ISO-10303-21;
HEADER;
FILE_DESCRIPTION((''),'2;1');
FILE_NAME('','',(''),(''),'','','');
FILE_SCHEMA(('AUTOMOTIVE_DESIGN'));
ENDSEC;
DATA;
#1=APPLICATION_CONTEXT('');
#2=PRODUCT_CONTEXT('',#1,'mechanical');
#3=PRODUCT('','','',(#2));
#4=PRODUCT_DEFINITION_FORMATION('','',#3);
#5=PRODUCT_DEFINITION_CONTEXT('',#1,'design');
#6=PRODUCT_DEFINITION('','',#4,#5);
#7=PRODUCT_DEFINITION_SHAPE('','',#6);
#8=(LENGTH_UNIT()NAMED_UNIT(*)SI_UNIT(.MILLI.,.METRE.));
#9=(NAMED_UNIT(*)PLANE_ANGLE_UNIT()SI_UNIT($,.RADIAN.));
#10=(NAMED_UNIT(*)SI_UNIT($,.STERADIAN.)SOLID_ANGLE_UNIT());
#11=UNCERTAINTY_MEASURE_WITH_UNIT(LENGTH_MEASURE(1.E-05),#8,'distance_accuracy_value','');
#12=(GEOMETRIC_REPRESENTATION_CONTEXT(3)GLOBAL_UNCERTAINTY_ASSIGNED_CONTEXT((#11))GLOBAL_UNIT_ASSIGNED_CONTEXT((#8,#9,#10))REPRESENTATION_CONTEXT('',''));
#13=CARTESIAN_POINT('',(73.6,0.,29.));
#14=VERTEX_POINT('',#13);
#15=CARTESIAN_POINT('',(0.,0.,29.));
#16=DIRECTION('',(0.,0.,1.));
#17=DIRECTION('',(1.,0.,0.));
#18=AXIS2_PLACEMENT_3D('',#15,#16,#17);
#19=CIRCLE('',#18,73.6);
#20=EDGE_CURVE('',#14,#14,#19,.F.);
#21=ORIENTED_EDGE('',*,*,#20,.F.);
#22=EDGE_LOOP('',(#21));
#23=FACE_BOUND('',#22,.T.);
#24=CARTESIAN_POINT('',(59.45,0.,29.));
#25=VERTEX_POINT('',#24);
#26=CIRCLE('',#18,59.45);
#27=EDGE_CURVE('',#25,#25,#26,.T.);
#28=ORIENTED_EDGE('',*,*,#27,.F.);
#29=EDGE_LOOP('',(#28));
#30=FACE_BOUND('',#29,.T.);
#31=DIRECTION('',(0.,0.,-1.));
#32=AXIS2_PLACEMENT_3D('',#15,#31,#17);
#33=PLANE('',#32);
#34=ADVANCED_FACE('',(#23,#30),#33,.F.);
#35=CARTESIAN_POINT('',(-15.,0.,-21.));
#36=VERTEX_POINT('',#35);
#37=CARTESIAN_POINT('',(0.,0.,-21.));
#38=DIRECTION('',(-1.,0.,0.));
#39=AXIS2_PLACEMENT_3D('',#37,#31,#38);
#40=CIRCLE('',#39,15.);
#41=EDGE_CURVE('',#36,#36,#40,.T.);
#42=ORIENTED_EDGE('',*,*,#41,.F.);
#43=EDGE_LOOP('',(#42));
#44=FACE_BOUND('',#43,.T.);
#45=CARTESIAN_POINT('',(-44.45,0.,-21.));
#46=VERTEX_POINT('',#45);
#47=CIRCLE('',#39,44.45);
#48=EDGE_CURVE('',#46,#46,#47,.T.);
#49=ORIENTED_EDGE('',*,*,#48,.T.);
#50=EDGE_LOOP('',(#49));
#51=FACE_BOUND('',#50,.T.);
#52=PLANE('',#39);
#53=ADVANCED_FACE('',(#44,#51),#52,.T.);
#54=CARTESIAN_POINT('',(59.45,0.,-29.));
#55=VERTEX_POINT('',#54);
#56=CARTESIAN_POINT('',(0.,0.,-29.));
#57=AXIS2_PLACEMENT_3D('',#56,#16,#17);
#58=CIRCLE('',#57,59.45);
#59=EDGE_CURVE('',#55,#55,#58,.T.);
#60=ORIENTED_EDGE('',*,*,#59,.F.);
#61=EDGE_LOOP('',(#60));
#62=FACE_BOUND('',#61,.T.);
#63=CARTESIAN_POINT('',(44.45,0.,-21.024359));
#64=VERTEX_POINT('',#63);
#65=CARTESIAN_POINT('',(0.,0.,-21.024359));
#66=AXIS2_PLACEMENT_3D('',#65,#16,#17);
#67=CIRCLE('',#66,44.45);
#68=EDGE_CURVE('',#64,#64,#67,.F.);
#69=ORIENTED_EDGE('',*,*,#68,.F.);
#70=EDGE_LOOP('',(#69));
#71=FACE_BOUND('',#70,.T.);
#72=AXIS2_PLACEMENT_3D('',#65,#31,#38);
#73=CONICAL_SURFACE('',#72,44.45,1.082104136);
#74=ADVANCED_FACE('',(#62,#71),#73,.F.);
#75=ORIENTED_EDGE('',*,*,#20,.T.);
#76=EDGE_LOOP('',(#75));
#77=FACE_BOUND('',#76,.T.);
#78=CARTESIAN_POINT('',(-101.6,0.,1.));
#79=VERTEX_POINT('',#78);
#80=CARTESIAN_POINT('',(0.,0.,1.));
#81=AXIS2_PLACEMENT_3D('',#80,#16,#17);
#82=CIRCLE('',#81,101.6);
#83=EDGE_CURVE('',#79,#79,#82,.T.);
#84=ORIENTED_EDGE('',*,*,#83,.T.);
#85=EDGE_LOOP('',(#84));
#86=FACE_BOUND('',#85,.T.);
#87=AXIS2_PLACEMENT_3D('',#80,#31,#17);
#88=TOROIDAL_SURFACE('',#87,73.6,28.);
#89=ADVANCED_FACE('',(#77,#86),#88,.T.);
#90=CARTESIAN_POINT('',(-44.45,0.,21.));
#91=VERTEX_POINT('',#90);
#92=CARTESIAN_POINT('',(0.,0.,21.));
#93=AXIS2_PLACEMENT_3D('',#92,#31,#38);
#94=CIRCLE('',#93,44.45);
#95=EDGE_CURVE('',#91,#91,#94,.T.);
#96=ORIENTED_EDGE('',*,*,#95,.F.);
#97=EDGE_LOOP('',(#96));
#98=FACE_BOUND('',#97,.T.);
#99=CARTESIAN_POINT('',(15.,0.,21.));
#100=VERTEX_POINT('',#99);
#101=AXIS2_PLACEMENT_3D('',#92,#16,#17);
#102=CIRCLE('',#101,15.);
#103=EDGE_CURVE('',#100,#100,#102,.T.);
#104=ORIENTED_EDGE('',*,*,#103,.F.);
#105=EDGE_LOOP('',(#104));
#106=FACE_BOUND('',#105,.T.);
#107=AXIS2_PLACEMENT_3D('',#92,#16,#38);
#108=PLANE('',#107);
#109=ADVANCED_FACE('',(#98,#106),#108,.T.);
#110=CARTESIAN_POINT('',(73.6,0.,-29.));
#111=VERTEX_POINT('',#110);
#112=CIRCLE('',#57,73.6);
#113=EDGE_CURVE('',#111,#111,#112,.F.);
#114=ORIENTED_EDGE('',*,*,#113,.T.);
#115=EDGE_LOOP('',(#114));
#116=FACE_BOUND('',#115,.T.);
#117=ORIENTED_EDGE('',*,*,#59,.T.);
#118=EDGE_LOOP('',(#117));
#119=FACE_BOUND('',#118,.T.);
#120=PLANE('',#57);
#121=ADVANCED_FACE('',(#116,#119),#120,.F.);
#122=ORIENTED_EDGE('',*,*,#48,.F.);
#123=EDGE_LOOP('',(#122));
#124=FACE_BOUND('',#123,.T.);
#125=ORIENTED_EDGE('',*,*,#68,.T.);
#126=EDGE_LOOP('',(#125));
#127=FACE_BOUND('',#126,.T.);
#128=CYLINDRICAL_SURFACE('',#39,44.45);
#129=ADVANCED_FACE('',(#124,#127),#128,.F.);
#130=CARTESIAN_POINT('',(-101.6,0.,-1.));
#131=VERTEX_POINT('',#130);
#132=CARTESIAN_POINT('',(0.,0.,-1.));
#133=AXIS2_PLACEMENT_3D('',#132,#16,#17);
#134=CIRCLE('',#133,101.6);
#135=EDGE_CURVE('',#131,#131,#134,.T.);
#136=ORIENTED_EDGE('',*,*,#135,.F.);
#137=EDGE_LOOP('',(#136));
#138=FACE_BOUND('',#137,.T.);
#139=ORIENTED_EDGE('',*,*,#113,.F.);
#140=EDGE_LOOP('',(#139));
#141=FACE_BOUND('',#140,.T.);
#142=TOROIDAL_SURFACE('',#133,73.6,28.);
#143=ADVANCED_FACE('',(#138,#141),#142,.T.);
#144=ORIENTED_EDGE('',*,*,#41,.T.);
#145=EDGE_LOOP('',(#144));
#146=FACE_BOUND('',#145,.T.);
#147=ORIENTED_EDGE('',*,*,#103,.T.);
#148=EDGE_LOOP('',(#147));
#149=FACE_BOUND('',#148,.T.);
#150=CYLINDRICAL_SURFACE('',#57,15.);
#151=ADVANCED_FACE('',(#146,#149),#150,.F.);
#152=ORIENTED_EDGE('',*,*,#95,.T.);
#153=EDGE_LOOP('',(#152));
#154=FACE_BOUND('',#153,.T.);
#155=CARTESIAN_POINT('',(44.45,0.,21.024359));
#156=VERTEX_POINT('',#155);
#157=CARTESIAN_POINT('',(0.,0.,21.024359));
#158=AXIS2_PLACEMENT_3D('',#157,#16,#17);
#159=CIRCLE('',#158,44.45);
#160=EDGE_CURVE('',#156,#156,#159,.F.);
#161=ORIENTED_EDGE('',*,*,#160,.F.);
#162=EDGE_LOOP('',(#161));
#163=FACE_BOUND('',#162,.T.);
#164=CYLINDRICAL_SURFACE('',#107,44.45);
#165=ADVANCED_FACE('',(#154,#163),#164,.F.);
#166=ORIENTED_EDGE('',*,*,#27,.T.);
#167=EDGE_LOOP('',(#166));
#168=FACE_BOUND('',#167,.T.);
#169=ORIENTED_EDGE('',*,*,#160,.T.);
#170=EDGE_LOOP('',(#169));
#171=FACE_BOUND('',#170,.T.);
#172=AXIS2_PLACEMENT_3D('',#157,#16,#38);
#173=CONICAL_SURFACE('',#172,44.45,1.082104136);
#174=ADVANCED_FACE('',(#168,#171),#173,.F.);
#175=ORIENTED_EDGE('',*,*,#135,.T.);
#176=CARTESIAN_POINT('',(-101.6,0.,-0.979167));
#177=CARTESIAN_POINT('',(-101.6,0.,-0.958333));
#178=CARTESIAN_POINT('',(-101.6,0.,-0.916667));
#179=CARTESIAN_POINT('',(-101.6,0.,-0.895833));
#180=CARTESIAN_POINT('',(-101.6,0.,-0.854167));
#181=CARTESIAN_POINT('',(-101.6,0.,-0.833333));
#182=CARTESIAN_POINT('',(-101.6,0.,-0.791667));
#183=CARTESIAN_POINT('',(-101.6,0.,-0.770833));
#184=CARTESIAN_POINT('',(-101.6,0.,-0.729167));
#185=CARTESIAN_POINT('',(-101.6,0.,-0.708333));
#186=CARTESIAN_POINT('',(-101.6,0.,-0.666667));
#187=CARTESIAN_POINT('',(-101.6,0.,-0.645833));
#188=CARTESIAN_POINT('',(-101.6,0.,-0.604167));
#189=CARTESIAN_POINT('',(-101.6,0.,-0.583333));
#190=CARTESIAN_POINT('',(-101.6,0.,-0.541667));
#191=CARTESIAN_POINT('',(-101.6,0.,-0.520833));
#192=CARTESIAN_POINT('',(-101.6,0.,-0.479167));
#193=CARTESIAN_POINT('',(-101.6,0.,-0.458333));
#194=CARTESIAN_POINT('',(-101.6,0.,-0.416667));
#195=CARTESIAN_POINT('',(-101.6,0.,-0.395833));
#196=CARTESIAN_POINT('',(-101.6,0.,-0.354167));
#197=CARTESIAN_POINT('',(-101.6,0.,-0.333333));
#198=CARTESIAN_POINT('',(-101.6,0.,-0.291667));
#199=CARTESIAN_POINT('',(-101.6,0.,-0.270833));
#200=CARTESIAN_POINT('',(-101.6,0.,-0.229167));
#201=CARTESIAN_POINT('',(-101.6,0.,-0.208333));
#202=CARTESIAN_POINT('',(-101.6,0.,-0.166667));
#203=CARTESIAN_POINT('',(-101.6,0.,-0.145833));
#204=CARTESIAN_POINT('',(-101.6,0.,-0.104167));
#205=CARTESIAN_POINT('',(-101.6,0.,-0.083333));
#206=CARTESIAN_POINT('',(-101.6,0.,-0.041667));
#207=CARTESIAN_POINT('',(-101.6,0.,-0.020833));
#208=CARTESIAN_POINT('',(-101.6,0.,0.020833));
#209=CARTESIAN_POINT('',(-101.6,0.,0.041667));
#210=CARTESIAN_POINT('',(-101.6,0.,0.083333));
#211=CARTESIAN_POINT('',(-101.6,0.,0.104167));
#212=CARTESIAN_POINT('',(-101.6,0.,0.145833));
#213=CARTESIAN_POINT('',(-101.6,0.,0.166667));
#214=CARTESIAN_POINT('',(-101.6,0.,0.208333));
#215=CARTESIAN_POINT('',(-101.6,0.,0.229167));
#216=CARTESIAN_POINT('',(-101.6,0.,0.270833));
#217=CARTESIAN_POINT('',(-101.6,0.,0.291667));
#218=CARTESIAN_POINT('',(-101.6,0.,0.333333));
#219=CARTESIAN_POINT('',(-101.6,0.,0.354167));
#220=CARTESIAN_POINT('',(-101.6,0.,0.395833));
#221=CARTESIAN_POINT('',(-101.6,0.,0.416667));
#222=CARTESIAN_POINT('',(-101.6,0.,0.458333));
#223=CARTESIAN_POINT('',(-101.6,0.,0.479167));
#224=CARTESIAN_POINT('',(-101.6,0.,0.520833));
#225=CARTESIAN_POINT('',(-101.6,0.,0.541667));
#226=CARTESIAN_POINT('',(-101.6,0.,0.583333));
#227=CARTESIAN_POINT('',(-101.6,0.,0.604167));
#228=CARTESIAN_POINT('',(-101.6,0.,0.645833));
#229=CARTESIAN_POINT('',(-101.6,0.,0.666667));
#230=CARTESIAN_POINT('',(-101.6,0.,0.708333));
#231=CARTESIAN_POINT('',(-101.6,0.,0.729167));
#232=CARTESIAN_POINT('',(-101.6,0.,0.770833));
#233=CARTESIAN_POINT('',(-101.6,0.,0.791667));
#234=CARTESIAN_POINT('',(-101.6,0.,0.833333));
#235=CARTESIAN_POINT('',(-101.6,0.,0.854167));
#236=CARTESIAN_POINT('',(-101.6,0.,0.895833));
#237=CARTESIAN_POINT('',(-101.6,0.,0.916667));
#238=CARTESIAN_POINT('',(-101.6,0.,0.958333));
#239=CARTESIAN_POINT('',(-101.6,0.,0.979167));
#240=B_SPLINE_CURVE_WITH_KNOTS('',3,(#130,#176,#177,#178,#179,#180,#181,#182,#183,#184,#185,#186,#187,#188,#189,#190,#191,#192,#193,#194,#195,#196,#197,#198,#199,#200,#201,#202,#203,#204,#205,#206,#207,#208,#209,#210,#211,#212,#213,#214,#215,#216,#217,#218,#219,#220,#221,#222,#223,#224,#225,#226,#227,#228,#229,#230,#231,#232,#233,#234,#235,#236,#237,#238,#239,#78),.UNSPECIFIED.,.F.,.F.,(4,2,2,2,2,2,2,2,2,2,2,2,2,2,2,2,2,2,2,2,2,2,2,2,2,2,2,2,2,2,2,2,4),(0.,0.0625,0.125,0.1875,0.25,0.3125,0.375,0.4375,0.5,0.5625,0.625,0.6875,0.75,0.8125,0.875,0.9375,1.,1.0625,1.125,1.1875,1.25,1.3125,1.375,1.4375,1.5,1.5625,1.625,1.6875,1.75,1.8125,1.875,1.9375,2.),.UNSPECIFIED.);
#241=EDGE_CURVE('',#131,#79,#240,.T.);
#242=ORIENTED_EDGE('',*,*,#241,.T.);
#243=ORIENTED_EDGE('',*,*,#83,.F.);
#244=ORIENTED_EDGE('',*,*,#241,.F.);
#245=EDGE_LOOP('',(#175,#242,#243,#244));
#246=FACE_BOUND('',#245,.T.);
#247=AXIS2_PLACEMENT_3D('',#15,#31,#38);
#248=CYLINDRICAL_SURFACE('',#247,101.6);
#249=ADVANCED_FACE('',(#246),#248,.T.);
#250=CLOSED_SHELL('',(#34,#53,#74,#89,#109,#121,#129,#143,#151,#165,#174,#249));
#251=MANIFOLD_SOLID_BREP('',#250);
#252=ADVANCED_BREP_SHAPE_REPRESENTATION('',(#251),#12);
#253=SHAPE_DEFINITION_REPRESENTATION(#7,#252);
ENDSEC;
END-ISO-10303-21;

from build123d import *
from build123d.topology import SkipClean

# Parameters (mm, degrees)
CROQUIS1_R                   = 101.6
CROQUIS1_R_2                 = 7.9375
SALIENTE_EXTRUIR1_DEPTH      = 29
REDONDEO1_R                  = 28
CROQUIS2_R                   = 44.45
CORTAR_EXTRUIR1_DEPTH        = 8
CHAFL_N1_SIZE                = 15
CHAFL_N1_SIZE2               = 7.975641475
CHAFL_N2_SIZE                = 7.975641475
CHAFL_N2_SIZE_2              = 15
CORTAR_EXTRUIR2_DEPTH        = 147.581445076
CORTAR_EXTRUIR2_DEPTH_BACK   = 147.581445076
CROQUIS5_R                   = 7.9375
SALIENTE_EXTRUIR2_DEPTH      = 120
CROQUIS6_R                   = 12.9375
CROQUIS6_R_2                 = 7.9375
SALIENTE_EXTRUIR3_DEPTH      = 20
CROQUIS8_R                   = 3
CORTAR_EXTRUIR3_DEPTH        = 20
SALIENTE_EXTRUIR4_DEPTH      = 10
REDONDEO2_R                  = 1
CROQUIS11_R                  = 15
CORTAR_EXTRUIR4_DEPTH        = 50
SALIENTE_EXTRUIR5_DEPTH      = 5
SALIENTE_EXTRUIR5_DEPTH_BACK = 50
CROQUIS12_R                  = 15
CROQUIS12_R_2                = 7.9375
CROQUIS15_R                  = 7.9375
SALIENTE_EXTRUIR7_DEPTH      = 5
CROQUIS13_R                  = 3
SALIENTE_EXTRUIR8_DEPTH      = 5
SALIENTE_EXTRUIR8_2_DEPTH    = 5
SALIENTE_EXTRUIR8_3_DEPTH    = 5
SALIENTE_EXTRUIR8_4_DEPTH    = 5
CROQUIS17_R                  = 3
CORTAR_EXTRUIR5_DEPTH        = 16


with BuildPart() as part:
    # Croquis1 → Saliente-Extruir1 (new, symmetric)
    with BuildSketch(Plane.XY):
        with Locations(Location((0, 0, 0), (0, 0, 180))):
            Circle(CROQUIS1_R)
        with Locations(Location((0, 0, 0), (0, 0, 180))):
            Circle(CROQUIS1_R_2, mode=Mode.SUBTRACT)
    extrude(amount=SALIENTE_EXTRUIR1_DEPTH, both=True)

    # Redondeo1
    redondeo1_edges = [part.edges().sort_by_distance(p)[0] for p in [
        (101.6, 0, -29),
        (101.6, 0, 29),
    ]]
    fillet(redondeo1_edges, radius=REDONDEO1_R)

    # Croquis2 → Cortar-Extruir1 (cut)
    with BuildSketch(Plane(origin=(0, 0, -29), x_dir=(-1, 0, 0), z_dir=(0, 0, -1))):
        Circle(CROQUIS2_R)
    cortar_extruir1 = extrude(amount=-CORTAR_EXTRUIR1_DEPTH, mode=Mode.SUBTRACT)

    # Simetría3: Cortar-Extruir1 across plane
    add(cortar_extruir1.mirror(Plane.XY), mode=Mode.SUBTRACT)

    # Chaflán1
    chafl_n1_edges = [part.edges().sort_by_distance(p)[0] for p in [
        (44.45, 0, -29),
    ]]
    chafl_n1_side = [part.faces().sort_by_distance(p)[0] for p in [
        (71.518277636, 0, -29),
    ]]
    chamfer(chafl_n1_edges, length=CHAFL_N1_SIZE, length2=CHAFL_N1_SIZE2, reference=chafl_n1_side[0])

    # Chaflán2
    # the kernel refuses this chamfer: 15, 7.975641475 mm, written as the material it takes off along each edge
    with BuildSketch(Plane(origin=(0, 0, 29), x_dir=(-1, 0, 0), z_dir=(0, -1, 0))) as chafl_n2_piece_1_section:
        Polygon((44.45 + CHAFL_N2_SIZE, 0), (44.45, CHAFL_N2_SIZE_2), (44.45, 0), align=None)
    chafl_n2_piece_1 = revolve(axis=Axis((0, 0, 29), (0, 0, -1)), mode=Mode.PRIVATE)
    chafl_n2_piece_1 = split(chafl_n2_piece_1, bisect_by=Plane(origin=(50.219175815, 0, 21), z_dir=(0, 0, 1)), keep=Keep.TOP, mode=Mode.PRIVATE)
    add(chafl_n2_piece_1, mode=Mode.SUBTRACT)

    # Croquis3 → Cortar-Extruir2 (cut, two sides: drawn at the far end of the back side and taken through both)
    with BuildSketch(Plane(origin=(0, 0, 0), x_dir=(0, 0, -1), z_dir=(1, 0, 0)).offset(-CORTAR_EXTRUIR2_DEPTH_BACK)):
        Polygon((0, -580.951086966), (0, -121.331484358), (0, 121.331484358), (0, 580.951086966), (-919.239205217, 580.951086966), (-919.239205217, -580.951086966), align=None)
    extrude(amount=CORTAR_EXTRUIR2_DEPTH + CORTAR_EXTRUIR2_DEPTH_BACK, mode=Mode.SUBTRACT)

    # Simetría4: part across plane


with BuildPart() as part_1:
    add(part.part)
    add(part.part.mirror(Plane(origin=(376.375487344, -121.331484358, 0), x_dir=(1, 0, 0), z_dir=(0, 0, 1))))

    # Croquis11 → Cortar-Extruir4 (cut)
    with BuildSketch(Plane.XY.offset(21)):
        Circle(CROQUIS11_R)
    extrude(amount=-CORTAR_EXTRUIR4_DEPTH, mode=Mode.SUBTRACT)


with BuildPart() as body_2:
    # Croquis5 → Saliente-Extruir2 (new body)
    with BuildSketch(Plane.XY.offset(21)):
        with Locations(Location((0, 0, 0), (0, 0, 180))):
            Circle(CROQUIS5_R)
    extrude(amount=-SALIENTE_EXTRUIR2_DEPTH)


with BuildPart() as body_3:
    # Croquis6 → Saliente-Extruir3 (new body)
    with BuildSketch(Plane(origin=(0, 0, -99), x_dir=(-1, 0, 0), z_dir=(0, 0, -1))):
        Circle(CROQUIS6_R)
        Circle(CROQUIS6_R_2, mode=Mode.SUBTRACT)
    extrude(amount=-SALIENTE_EXTRUIR3_DEPTH)

    # Croquis8 → Cortar-Extruir3 (cut)
    with BuildSketch(Plane(origin=(0, 0, 0), x_dir=(1, 0, 0), z_dir=(0, 1, 0))):
        with Locations(Location((0, 89, 0), (0, 0, 90))):
            Circle(CROQUIS8_R)
    extrude(amount=CORTAR_EXTRUIR3_DEPTH, mode=Mode.SUBTRACT)

    # Croquis10 → Saliente-Extruir4 (add)
    with BuildSketch(Plane(origin=(0, 0, -99), x_dir=(-1, 0, 0), z_dir=(0, 0, -1))):
        with BuildLine():
            Line((-5, 17.5), (5, 17.5))
            ThreePointArc((5, 17.5), (7.856559563, 13.607960336), (12.655444566, 13.080127019))
            Line((12.655444566, 13.080127019), (17.655444566, 4.419872981))
            ThreePointArc((17.655444566, 4.419872981), (15.713119126, 0), (17.655444566, -4.419872981))
            Line((17.655444566, -4.419872981), (12.655444566, -13.080127019))
            ThreePointArc((12.655444566, -13.080127019), (7.856559563, -13.607960336), (5, -17.5))
            Line((5, -17.5), (-5, -17.5))
            ThreePointArc((-5, -17.5), (-7.856559563, -13.607960336), (-12.655444566, -13.080127019))
            Line((-12.655444566, -13.080127019), (-17.655444566, -4.419872981))
            ThreePointArc((-17.655444566, -4.419872981), (-15.713119126, 0), (-17.655444566, 4.419872981))
            Line((-17.655444566, 4.419872981), (-12.655444566, 13.080127019))
            ThreePointArc((-12.655444566, 13.080127019), (-7.856559563, 13.607960336), (-5, 17.5))
        make_face()
    extrude(amount=SALIENTE_EXTRUIR4_DEPTH)

    # Redondeo2
    redondeo2_edges = [body_3.edges().sort_by_distance(p)[0] for p in [
        (5, 17.5, -104),
        (12.655444566, 13.080127019, -104),
        (17.655444566, 4.419872981, -104),
        (17.655444566, -4.419872981, -104),
        (12.655444566, -13.080127019, -104),
        (5, -17.5, -104),
        (-5, -17.5, -104),
        (-12.655444566, -13.080127019, -104),
        (-17.655444566, -4.419872981, -104),
        (-17.655444566, 4.419872981, -104),
        (-12.655444566, 13.080127019, -104),
        (-5, 17.5, -104),
    ]]
    fillet(redondeo2_edges, radius=REDONDEO2_R)


with BuildPart() as body_4:
    # Croquis12 → Saliente-Extruir5 (new, two sides: drawn at the far end of the back side and taken through both)
    with BuildSketch(Plane.XY.offset(21).offset(-SALIENTE_EXTRUIR5_DEPTH_BACK)):
        Circle(CROQUIS12_R)
        with Locations(Location((0, 0, 0), (0, 0, 180))):
            Circle(CROQUIS12_R_2, mode=Mode.SUBTRACT)
    extrude(amount=SALIENTE_EXTRUIR5_DEPTH + SALIENTE_EXTRUIR5_DEPTH_BACK)


with BuildPart() as body_5:
    # Croquis15 → Saliente-Extruir7 (new body)
    with BuildSketch(Plane.XY.offset(21)):
        with Locations(Location((0, 0, 0), (0, 0, 180))):
            Circle(CROQUIS15_R)
    extrude(amount=SALIENTE_EXTRUIR7_DEPTH)

    # Combinar1: union body 2
    add(body_2.part)


with BuildPart() as body_5_2:
    # Croquis13 → Saliente-Extruir8 (new body)
    with BuildSketch(Plane.XY.offset(26)):
        with BuildLine():
            Line((5, -25), (5, -6.164730834))
            ThreePointArc((5, -6.164730834), (0, -7.9375), (-5, -6.164730834))
            Line((-5, -6.164730834), (-5, -25))
            Line((-5, -25), (5, -25))
        make_face()
        with Locations((0, -18.5)):
            Circle(CROQUIS13_R, mode=Mode.SUBTRACT)
    extrude(amount=-SALIENTE_EXTRUIR8_DEPTH)


with BuildPart() as body_6:
    # Croquis13 → Saliente-Extruir8 2 (new body)
    with BuildSketch(Plane.XY.offset(26)):
        with BuildLine():
            Line((-5, 25), (5, 25))
            Line((5, 25), (5, 6.164730834))
            ThreePointArc((5, 6.164730834), (0, 7.9375), (-5, 6.164730834))
            Line((-5, 6.164730834), (-5, 25))
        make_face()
        with Locations((0, 18.5)):
            Circle(CROQUIS13_R, mode=Mode.SUBTRACT)
    extrude(amount=-SALIENTE_EXTRUIR8_2_DEPTH)


with BuildPart() as body_7:
    # Croquis13 → Saliente-Extruir8 3 (new body)
    with BuildSketch(Plane.XY.offset(26)):
        with BuildLine():
            Line((-25, -5), (-6.164730834, -5))
            ThreePointArc((-6.164730834, -5), (-7.9375, 0), (-6.164730834, 5))
            Line((-6.164730834, 5), (-25, 5))
            Line((-25, 5), (-25, 0))
            Line((-25, 0), (-25, -5))
        make_face()
        with Locations((-18.5, 0)):
            Circle(CROQUIS13_R, mode=Mode.SUBTRACT)
    extrude(amount=-SALIENTE_EXTRUIR8_3_DEPTH)


with BuildPart() as body_8:
    # Croquis13 → Saliente-Extruir8 4 (new body)
    with BuildSketch(Plane.XY.offset(26)):
        with BuildLine():
            Line((25, -5), (25, 5))
            Line((25, 5), (6.164730834, 5))
            ThreePointArc((6.164730834, 5), (7.9375, 0), (6.164730834, -5))
            Line((6.164730834, -5), (25, -5))
        make_face()
        with Locations((18.5, 0)):
            Circle(CROQUIS13_R, mode=Mode.SUBTRACT)
    extrude(amount=-SALIENTE_EXTRUIR8_4_DEPTH)


with BuildPart() as body_4_1:
    add(body_4.part)

    # Combinar2: union body 6, body 8, body 5 2, body 7
    add(body_6.part)
    add(body_8.part)
    add(body_5_2.part)
    add(body_7.part)

    # Croquis17 → Cortar-Extruir5 (cut)
    with SkipClean():  # the faces are left unmerged after this step: merging them gives an invalid solid
        with BuildSketch(Plane(origin=(0, 0, 0), x_dir=(1, 0, 0), z_dir=(0, 1, 0))):
            with Locations(Location((0, 24, 0), (0, 0, 90))):
                Circle(CROQUIS17_R)
        extrude(amount=CORTAR_EXTRUIR5_DEPTH, mode=Mode.SUBTRACT)


solid = part_1.part
